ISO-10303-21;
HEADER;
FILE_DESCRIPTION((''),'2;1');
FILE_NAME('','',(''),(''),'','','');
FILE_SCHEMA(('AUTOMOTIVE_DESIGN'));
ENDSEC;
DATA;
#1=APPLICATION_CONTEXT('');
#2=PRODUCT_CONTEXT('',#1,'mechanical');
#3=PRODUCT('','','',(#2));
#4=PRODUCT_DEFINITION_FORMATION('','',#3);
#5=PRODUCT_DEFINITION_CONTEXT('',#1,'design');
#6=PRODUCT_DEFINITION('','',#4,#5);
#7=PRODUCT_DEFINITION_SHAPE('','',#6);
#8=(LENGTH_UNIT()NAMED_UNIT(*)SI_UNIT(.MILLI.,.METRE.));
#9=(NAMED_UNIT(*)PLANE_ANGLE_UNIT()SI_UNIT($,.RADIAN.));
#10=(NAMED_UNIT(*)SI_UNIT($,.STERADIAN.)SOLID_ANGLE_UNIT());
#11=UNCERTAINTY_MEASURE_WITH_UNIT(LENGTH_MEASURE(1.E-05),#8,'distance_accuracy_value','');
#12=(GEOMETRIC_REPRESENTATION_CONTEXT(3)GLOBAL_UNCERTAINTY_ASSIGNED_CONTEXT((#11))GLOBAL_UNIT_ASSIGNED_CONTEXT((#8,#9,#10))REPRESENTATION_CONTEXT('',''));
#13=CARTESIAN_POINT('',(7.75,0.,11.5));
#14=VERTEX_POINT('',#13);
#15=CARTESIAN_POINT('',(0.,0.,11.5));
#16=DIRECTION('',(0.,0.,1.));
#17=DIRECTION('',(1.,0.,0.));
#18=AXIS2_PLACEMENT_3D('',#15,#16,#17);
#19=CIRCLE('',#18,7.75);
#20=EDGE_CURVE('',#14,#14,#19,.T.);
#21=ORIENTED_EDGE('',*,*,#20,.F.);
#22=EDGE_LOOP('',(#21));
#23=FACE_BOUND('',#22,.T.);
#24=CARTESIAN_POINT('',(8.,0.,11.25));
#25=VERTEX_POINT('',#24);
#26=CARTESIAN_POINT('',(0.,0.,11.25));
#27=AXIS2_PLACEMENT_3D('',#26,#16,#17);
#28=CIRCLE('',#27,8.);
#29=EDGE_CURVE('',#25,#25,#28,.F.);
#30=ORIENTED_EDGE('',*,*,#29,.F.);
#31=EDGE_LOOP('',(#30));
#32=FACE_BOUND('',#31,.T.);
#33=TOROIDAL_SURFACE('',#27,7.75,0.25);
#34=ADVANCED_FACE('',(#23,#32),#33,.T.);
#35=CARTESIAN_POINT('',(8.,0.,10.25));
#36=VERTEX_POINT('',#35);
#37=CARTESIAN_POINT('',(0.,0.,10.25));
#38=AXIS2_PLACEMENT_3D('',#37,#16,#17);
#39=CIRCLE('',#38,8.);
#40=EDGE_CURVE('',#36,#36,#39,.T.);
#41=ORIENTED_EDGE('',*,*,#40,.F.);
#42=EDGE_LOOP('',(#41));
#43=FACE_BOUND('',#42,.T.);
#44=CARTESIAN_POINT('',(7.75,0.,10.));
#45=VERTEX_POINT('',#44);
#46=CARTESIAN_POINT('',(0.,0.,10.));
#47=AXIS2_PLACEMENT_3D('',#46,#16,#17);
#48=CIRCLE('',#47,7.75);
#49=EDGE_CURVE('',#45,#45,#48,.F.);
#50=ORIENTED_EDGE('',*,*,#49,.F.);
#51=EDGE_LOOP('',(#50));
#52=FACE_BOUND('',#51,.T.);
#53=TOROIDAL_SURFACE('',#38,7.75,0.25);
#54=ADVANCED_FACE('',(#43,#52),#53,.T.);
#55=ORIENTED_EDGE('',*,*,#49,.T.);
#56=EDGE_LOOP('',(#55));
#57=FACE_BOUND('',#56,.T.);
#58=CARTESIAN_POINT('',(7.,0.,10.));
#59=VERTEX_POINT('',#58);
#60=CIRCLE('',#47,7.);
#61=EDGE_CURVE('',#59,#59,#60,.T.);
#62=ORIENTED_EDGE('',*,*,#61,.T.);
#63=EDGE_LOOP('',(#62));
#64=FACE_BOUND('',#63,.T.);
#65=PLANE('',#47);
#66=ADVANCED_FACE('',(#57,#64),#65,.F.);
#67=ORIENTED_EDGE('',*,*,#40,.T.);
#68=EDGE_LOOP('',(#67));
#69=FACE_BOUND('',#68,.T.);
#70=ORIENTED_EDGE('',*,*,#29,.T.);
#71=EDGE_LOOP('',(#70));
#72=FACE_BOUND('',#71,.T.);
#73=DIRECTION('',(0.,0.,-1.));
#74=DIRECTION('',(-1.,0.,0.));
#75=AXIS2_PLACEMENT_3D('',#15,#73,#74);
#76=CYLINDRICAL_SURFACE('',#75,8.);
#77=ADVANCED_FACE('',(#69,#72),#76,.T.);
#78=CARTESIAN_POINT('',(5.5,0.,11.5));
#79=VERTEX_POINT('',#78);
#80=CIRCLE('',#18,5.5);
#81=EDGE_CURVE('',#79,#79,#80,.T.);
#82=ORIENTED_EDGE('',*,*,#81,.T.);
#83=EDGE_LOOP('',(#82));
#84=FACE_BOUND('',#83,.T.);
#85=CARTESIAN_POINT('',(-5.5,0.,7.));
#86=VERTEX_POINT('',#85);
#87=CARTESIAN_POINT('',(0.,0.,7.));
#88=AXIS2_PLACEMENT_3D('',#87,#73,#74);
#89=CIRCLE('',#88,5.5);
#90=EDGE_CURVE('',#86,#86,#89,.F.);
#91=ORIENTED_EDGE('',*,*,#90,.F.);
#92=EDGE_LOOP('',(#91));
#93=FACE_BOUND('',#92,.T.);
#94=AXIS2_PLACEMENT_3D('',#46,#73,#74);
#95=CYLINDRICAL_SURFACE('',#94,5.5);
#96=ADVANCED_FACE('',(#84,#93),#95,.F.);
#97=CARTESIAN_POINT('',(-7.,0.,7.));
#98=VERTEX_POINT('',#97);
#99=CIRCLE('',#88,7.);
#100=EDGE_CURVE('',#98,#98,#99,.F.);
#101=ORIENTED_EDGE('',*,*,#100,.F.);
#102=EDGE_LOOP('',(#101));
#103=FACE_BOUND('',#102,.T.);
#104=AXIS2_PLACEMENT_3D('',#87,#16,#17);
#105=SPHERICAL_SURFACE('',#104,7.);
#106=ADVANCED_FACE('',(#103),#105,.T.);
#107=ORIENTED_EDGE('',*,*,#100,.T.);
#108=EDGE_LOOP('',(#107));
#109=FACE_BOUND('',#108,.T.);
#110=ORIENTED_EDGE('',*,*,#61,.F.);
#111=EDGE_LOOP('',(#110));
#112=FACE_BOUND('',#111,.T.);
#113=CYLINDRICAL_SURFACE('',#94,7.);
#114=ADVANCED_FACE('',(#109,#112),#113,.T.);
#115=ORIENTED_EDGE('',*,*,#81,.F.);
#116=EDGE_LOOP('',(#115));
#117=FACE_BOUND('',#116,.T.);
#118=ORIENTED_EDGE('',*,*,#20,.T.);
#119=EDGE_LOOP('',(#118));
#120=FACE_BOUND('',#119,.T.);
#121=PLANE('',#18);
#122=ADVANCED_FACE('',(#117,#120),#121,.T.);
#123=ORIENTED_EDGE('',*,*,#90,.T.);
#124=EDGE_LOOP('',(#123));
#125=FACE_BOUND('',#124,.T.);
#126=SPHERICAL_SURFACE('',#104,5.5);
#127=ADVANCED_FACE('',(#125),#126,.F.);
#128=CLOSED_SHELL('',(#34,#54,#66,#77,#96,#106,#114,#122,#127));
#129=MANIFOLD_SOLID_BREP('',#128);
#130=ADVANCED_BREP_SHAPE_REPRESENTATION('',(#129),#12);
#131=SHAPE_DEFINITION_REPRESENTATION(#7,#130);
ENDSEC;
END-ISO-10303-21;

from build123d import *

# Parameters (mm, degrees)
SKETCH2_R           = 7
BOSS_EXTRUDE1_DEPTH = 10
SKETCH3_R           = 8
BOSS_EXTRUDE2_DEPTH = 1.5
FILLET3_R           = 7
FILLET4_R           = 0.25


# Read off the part's stored shape, not the designer's step: Shell1
with BuildPart() as part:
    # Sketch2 → Boss-Extrude1 (new body)
    with BuildSketch(Plane.XY):
        Circle(SKETCH2_R)
    extrude(amount=BOSS_EXTRUDE1_DEPTH)

    # Sketch3 → Boss-Extrude2 (add)
    with BuildSketch(Plane.XY.offset(10)):
        Circle(SKETCH3_R)
    extrude(amount=BOSS_EXTRUDE2_DEPTH)

    # Fillet3
    fillet3_edges = [part.edges().sort_by_distance(p)[0] for p in [
        (-7, 0, 0),
    ]]
    fillet(fillet3_edges, radius=FILLET3_R)

    # Shell1 outline → Shell1 (revolve, cut)
    with BuildSketch(Plane.XZ):
        with BuildLine():
            Line((5.5, 7.000000005), (5.5, 11.5))
            Line((5.5, 11.5), (0, 11.5))
            Line((0, 11.5), (0, 1.5))
            ThreePointArc((0, 1.5), (3.889087298, 3.110912705), (5.5, 7.000000005))
        make_face()
    revolve(axis=Axis((0, 0, 0), (0, 0, 1)), mode=Mode.SUBTRACT)

    # Fillet4
    fillet4_edges = [part.edges().sort_by_distance(p)[0] for p in [
        (-8, 0, 10),
        (-8, 0, 11.5),
    ]]
    fillet(fillet4_edges, radius=FILLET4_R)


solid = part.part
